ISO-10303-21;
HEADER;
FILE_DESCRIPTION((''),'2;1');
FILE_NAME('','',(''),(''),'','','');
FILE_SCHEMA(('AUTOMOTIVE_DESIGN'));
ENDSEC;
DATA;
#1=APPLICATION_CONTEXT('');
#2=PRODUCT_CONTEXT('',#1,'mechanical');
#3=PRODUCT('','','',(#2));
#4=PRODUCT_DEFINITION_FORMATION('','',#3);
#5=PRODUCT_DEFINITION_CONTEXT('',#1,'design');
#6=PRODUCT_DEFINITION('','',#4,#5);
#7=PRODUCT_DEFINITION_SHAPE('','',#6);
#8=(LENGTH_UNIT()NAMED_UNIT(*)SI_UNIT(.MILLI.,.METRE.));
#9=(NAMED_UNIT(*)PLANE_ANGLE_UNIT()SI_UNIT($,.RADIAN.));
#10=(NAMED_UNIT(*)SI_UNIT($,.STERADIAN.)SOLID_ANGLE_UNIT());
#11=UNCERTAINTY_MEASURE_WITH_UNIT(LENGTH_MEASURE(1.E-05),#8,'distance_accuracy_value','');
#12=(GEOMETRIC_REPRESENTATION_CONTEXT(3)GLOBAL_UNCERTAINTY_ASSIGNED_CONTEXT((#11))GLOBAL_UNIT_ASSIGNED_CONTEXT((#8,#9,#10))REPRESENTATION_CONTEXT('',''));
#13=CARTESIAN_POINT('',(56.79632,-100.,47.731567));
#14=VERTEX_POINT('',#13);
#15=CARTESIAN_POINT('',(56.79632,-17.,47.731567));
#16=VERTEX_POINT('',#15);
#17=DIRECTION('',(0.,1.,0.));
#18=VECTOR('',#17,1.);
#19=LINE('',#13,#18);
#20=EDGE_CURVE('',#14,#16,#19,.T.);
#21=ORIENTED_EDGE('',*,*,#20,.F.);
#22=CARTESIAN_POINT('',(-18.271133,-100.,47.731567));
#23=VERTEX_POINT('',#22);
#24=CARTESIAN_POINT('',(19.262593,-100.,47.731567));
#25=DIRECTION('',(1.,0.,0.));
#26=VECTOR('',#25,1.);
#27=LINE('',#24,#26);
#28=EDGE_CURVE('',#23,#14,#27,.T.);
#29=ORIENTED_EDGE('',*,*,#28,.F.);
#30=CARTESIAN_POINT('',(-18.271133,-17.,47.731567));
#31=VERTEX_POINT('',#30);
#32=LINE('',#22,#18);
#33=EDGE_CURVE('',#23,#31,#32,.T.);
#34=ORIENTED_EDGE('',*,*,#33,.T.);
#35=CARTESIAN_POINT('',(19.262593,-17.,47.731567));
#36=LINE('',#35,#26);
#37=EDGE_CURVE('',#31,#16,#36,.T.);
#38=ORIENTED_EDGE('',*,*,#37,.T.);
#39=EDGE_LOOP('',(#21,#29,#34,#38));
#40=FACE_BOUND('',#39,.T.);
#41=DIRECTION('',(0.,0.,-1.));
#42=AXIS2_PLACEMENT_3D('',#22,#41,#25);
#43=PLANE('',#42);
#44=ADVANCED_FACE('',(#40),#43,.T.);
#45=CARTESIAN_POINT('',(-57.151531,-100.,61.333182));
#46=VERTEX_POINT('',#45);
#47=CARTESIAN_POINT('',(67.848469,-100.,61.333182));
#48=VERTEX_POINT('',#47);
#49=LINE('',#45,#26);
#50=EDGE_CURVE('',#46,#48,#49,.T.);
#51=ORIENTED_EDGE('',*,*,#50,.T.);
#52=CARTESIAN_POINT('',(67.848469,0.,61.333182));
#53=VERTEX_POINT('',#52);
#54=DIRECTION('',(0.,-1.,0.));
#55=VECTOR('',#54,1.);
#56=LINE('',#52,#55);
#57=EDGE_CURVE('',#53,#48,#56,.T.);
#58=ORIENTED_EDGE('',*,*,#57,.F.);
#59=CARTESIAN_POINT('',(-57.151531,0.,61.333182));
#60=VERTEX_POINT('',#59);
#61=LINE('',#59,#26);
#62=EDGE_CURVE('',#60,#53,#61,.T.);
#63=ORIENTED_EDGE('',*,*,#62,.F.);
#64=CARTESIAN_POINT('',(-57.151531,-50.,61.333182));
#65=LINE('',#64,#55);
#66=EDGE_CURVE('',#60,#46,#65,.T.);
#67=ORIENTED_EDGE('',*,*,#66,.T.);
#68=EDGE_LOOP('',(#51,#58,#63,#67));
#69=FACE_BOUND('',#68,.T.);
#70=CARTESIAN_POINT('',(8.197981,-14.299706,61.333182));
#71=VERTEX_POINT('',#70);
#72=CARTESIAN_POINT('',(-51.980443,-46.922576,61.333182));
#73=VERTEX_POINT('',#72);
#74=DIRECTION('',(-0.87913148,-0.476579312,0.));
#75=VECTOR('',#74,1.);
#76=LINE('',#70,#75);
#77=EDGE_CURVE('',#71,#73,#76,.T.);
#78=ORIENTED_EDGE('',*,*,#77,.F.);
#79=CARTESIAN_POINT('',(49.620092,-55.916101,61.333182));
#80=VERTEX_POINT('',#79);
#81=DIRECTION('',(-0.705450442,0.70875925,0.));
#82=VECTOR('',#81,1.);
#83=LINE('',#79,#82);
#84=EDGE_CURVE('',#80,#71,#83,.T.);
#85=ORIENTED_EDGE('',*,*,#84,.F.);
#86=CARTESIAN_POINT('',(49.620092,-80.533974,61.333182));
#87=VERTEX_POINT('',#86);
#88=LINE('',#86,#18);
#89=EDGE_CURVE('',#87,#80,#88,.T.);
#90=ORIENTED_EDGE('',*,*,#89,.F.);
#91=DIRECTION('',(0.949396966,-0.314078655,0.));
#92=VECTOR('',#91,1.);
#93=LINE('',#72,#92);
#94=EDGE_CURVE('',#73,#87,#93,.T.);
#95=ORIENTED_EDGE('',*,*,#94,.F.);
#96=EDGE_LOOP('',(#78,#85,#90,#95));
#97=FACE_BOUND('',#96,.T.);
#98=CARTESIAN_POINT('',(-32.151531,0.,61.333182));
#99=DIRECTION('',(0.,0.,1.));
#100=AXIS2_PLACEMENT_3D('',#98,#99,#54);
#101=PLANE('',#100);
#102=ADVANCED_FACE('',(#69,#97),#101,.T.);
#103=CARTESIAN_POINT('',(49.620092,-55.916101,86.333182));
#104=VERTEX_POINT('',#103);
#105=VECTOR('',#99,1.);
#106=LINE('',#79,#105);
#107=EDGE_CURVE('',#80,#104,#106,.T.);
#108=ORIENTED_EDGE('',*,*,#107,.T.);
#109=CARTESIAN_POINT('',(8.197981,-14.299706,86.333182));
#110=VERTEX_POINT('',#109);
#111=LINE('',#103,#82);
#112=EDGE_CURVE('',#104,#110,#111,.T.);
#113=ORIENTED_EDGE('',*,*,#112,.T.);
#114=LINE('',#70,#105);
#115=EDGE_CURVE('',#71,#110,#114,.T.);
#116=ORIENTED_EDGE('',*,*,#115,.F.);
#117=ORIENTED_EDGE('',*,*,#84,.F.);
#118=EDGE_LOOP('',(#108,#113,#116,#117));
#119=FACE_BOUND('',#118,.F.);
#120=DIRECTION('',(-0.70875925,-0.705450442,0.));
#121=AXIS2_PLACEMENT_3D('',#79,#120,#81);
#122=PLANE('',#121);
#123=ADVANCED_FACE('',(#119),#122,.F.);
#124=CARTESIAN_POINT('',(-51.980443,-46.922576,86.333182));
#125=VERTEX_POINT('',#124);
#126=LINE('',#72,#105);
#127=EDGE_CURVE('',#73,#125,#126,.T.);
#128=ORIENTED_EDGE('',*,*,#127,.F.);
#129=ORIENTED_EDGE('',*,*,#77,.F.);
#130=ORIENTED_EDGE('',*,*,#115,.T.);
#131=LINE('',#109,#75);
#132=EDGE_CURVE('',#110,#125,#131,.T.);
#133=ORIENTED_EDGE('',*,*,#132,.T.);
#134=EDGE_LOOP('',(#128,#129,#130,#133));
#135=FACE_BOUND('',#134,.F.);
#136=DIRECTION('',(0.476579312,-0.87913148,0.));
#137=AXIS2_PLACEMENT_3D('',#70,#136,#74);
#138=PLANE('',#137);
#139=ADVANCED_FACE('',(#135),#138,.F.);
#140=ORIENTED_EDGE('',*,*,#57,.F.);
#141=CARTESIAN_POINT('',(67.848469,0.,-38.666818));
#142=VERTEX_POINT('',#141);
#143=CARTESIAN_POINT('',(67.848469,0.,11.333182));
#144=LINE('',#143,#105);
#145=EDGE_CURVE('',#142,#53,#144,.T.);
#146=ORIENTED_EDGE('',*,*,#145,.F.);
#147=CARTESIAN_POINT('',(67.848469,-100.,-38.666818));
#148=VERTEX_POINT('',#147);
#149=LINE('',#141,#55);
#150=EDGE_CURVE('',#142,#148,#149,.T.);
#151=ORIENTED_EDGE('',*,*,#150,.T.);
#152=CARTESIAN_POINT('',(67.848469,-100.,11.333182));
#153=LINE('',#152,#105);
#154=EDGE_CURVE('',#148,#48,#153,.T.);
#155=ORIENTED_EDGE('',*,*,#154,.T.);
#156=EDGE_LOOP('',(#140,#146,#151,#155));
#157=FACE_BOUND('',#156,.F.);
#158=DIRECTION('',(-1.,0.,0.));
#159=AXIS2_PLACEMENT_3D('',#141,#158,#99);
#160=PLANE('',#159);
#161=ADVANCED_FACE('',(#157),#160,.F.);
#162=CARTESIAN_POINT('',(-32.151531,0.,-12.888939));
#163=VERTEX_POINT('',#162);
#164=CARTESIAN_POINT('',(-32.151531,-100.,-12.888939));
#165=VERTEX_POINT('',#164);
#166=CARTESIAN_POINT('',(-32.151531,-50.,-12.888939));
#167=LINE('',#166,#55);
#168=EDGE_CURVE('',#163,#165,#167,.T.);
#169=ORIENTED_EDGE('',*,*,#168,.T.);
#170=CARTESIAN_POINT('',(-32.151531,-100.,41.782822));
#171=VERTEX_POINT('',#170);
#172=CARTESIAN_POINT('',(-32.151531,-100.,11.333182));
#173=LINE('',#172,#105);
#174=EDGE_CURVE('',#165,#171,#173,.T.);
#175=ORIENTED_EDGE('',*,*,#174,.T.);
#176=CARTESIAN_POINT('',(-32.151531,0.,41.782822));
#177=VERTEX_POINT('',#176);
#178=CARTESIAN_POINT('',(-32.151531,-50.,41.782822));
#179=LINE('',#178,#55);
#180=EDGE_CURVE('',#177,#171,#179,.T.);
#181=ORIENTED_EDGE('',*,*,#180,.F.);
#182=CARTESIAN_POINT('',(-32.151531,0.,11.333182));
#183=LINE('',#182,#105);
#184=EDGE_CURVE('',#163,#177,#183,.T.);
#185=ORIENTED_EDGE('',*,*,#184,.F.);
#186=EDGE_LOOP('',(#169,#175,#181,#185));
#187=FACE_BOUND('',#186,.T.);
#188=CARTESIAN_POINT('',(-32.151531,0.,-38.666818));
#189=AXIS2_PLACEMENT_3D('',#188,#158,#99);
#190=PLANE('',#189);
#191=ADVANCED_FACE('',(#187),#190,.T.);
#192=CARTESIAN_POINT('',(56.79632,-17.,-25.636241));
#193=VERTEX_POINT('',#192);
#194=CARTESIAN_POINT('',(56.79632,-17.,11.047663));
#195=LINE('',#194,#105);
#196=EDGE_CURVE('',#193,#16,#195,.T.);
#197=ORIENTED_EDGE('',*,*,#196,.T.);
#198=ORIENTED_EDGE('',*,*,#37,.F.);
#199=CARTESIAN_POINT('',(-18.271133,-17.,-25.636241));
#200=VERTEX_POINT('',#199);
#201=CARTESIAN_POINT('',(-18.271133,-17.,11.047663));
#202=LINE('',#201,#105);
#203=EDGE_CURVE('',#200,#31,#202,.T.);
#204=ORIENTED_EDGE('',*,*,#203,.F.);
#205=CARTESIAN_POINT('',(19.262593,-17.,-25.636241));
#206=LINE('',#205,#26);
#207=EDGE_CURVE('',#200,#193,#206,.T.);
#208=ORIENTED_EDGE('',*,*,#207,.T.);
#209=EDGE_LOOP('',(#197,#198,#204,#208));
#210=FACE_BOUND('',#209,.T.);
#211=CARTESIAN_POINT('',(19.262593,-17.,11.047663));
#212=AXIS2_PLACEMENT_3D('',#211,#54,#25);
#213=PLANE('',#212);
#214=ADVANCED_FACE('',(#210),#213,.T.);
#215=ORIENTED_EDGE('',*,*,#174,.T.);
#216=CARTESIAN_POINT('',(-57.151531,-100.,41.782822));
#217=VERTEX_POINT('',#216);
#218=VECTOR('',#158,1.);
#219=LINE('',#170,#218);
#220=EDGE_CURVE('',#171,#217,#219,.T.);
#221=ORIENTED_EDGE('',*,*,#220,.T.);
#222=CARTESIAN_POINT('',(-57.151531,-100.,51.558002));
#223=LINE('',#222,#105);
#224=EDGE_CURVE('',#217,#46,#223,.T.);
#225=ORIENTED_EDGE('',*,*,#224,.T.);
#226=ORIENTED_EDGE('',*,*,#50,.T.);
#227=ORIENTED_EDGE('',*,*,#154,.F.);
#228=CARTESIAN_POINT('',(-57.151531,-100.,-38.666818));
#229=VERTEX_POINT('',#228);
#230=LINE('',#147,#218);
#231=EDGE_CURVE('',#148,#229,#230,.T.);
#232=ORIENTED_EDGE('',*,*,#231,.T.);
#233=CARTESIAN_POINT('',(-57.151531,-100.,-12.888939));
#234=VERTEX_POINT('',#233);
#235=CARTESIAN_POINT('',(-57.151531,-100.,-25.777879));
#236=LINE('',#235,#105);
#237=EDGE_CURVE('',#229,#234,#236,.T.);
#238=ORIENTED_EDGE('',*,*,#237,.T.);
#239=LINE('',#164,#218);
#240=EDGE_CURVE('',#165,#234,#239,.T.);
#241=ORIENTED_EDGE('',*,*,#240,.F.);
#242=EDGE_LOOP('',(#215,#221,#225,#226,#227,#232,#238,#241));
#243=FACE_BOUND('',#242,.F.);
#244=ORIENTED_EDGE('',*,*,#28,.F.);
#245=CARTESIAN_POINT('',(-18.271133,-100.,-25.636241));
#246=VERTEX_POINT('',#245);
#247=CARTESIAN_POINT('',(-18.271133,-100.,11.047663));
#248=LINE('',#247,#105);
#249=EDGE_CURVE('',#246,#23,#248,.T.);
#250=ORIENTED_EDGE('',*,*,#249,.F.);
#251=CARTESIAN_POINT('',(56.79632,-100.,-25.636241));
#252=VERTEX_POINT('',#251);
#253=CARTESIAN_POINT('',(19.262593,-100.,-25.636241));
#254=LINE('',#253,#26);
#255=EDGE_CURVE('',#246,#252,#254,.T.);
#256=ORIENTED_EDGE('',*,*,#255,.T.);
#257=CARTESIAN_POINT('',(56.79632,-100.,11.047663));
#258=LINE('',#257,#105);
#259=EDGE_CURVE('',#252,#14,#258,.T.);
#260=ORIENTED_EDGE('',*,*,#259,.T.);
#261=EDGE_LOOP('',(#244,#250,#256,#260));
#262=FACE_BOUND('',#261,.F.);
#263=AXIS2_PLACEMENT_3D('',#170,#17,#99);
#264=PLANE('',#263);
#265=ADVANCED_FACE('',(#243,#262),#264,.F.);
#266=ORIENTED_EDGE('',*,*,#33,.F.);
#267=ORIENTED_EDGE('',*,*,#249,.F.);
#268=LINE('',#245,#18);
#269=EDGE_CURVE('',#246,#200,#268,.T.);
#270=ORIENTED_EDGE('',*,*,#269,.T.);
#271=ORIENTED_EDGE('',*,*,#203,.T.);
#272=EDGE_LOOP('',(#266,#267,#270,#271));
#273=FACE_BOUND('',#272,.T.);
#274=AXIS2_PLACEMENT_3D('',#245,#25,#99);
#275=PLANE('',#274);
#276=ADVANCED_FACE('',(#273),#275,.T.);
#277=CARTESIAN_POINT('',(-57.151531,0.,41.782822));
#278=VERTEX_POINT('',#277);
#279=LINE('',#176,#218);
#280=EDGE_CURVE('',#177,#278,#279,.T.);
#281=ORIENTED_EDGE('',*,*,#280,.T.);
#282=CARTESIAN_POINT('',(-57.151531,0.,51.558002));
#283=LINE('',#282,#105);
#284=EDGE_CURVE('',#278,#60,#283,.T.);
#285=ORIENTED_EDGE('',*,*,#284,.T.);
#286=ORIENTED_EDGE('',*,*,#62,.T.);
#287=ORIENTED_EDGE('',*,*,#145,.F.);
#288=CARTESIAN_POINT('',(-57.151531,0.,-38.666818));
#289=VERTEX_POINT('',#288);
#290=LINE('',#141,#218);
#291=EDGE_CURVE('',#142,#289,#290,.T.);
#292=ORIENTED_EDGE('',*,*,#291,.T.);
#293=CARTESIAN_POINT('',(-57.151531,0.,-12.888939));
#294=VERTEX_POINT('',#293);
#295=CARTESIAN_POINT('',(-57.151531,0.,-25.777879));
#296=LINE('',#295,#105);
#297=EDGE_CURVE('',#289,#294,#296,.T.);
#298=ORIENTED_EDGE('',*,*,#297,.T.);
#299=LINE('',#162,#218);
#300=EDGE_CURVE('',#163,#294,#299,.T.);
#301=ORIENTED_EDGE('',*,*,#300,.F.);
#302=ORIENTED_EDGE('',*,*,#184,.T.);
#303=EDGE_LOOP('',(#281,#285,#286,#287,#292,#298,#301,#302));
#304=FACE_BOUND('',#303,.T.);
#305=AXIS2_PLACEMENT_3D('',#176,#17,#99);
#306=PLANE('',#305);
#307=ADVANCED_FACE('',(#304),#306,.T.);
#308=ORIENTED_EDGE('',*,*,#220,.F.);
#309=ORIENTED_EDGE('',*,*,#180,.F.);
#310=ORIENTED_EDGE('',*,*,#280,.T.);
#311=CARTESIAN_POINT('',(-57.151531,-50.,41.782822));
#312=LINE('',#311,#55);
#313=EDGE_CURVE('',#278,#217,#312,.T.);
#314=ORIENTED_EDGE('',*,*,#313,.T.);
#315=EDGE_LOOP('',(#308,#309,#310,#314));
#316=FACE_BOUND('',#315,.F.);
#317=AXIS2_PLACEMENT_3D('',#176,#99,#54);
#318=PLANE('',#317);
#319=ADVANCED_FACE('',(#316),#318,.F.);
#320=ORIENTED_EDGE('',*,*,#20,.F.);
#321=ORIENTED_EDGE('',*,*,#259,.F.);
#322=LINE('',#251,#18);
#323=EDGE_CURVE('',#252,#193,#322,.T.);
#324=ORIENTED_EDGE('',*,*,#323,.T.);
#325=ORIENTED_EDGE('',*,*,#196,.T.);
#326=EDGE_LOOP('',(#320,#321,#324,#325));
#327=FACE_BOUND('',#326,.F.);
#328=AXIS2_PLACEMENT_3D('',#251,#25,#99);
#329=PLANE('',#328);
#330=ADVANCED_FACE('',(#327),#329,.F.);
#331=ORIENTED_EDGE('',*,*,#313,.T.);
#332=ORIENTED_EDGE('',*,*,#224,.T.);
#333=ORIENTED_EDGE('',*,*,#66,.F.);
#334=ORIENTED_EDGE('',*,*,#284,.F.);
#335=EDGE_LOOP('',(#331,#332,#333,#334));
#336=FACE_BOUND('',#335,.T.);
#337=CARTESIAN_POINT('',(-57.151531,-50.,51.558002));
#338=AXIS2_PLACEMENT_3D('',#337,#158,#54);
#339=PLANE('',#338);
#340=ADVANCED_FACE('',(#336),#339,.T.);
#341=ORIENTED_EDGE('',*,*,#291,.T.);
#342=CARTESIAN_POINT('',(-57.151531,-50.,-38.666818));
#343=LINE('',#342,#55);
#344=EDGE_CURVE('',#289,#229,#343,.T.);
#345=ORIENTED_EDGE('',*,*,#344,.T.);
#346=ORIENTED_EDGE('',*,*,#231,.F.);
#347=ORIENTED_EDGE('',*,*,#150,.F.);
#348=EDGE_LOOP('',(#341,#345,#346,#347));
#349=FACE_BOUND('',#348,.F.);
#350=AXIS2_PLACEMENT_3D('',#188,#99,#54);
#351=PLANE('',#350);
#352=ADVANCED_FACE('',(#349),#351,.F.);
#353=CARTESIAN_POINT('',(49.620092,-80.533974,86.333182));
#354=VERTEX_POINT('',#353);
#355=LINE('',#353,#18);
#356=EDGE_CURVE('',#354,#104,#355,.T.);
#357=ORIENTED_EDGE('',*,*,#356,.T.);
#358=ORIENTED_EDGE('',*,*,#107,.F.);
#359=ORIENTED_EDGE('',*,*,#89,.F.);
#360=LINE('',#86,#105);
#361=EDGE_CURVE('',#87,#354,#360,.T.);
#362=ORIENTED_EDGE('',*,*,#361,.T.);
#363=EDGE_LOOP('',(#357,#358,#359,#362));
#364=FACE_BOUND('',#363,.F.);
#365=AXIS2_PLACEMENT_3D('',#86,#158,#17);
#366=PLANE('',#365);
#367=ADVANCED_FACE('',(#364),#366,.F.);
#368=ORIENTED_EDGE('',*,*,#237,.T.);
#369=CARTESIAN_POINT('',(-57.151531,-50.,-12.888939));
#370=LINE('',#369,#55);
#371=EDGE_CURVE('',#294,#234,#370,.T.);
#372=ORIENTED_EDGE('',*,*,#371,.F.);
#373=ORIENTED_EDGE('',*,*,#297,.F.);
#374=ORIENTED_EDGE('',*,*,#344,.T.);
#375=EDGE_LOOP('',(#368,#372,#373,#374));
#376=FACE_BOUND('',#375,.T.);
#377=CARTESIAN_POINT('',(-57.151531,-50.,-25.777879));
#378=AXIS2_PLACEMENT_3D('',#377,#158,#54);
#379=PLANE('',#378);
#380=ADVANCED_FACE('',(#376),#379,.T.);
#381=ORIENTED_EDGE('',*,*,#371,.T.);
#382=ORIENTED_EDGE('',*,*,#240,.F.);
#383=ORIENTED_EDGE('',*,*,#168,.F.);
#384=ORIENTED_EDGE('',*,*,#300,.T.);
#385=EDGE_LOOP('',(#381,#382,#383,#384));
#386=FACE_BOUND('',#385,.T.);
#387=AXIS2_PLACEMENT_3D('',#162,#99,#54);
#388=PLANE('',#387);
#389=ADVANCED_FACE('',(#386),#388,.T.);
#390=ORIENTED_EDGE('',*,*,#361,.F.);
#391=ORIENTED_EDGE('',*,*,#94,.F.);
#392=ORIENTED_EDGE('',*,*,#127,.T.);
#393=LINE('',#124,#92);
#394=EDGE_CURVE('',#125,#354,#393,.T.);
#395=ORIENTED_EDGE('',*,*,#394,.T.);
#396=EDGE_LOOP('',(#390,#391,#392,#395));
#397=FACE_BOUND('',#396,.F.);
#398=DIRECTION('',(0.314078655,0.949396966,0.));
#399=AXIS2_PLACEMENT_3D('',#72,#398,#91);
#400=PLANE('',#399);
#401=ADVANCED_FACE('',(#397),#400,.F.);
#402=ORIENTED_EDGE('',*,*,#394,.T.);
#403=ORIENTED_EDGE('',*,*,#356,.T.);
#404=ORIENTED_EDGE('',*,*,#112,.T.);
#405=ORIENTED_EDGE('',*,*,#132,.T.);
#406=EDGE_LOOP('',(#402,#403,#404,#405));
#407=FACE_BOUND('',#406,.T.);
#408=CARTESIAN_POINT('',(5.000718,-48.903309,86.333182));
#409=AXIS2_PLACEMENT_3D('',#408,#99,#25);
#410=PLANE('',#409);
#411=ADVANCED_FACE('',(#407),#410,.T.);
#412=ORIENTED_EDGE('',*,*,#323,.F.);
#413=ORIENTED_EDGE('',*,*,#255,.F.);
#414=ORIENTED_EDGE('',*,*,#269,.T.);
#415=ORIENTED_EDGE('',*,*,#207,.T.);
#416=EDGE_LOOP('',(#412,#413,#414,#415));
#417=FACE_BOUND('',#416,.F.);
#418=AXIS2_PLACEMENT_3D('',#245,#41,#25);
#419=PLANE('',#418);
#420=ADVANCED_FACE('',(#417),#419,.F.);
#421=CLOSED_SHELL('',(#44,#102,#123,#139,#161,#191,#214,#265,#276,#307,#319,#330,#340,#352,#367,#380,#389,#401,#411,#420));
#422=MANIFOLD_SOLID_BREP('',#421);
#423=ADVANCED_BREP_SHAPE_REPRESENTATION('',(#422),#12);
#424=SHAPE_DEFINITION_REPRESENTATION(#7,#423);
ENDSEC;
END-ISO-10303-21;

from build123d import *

# Parameters (mm, degrees)
F0_W     = 100
F0_H     = 100
F1_DEPTH = 100
F2_W     = 75.0674530864
F2_H     = 73.3678080142
F3_DEPTH = 83
F4_W     = 100
F4_H     = 25.7778791711
F5_DEPTH = 25
F6_W     = 100
F6_H     = 19.5503592491
F7_DEPTH = 25
F9_DEPTH = 25


# Not quite as in the source:
# - the program builds the solid bodies; features that only make, move or delete a surface that nothing else refers to are left out


with BuildPart() as f1:
    # F0 (on Front) → F1 (new body)
    with BuildSketch(Plane.XZ):
        with Locations((17.8484685719, 11.3331817091)):
            Rectangle(F0_W, F0_H)
    extrude(amount=F1_DEPTH)

    # F2 (on face) → F3 (cut)
    with BuildSketch(Plane.XZ.offset(100)):
        with Locations((19.2625932395, 11.0476631671)):
            Rectangle(F2_W, F2_H)
    extrude(amount=-F3_DEPTH, mode=Mode.SUBTRACT)

    # F4 (on face) → F5 (join)
    with BuildSketch(Plane(origin=(-32.1515314281, 0, 0), x_dir=(0, -1, 0), z_dir=(-1, 0, 0))):
        with Locations((50, -25.7778787054)):
            Rectangle(F4_W, F4_H)
    extrude(amount=F5_DEPTH)

    # F6 (on face) → F7 (join)
    with BuildSketch(Plane(origin=(-32.1515314281, 0, 0), x_dir=(0, -1, 0), z_dir=(-1, 0, 0))):
        with Locations((50, 51.5580020845)):
            Rectangle(F6_W, F6_H)
    extrude(amount=F7_DEPTH)

    # F8 (on face) → F9 (join)
    with BuildSketch(Plane.XY.offset(61.3331817091)):
        Polygon((8.1979809329, -14.2997056246), (-51.9804432988, -46.9225756824), (49.6200919151, -80.5339738727), (49.6200919151, -55.9161007404), align=None)
    extrude(amount=F9_DEPTH)


solid = f1.part
